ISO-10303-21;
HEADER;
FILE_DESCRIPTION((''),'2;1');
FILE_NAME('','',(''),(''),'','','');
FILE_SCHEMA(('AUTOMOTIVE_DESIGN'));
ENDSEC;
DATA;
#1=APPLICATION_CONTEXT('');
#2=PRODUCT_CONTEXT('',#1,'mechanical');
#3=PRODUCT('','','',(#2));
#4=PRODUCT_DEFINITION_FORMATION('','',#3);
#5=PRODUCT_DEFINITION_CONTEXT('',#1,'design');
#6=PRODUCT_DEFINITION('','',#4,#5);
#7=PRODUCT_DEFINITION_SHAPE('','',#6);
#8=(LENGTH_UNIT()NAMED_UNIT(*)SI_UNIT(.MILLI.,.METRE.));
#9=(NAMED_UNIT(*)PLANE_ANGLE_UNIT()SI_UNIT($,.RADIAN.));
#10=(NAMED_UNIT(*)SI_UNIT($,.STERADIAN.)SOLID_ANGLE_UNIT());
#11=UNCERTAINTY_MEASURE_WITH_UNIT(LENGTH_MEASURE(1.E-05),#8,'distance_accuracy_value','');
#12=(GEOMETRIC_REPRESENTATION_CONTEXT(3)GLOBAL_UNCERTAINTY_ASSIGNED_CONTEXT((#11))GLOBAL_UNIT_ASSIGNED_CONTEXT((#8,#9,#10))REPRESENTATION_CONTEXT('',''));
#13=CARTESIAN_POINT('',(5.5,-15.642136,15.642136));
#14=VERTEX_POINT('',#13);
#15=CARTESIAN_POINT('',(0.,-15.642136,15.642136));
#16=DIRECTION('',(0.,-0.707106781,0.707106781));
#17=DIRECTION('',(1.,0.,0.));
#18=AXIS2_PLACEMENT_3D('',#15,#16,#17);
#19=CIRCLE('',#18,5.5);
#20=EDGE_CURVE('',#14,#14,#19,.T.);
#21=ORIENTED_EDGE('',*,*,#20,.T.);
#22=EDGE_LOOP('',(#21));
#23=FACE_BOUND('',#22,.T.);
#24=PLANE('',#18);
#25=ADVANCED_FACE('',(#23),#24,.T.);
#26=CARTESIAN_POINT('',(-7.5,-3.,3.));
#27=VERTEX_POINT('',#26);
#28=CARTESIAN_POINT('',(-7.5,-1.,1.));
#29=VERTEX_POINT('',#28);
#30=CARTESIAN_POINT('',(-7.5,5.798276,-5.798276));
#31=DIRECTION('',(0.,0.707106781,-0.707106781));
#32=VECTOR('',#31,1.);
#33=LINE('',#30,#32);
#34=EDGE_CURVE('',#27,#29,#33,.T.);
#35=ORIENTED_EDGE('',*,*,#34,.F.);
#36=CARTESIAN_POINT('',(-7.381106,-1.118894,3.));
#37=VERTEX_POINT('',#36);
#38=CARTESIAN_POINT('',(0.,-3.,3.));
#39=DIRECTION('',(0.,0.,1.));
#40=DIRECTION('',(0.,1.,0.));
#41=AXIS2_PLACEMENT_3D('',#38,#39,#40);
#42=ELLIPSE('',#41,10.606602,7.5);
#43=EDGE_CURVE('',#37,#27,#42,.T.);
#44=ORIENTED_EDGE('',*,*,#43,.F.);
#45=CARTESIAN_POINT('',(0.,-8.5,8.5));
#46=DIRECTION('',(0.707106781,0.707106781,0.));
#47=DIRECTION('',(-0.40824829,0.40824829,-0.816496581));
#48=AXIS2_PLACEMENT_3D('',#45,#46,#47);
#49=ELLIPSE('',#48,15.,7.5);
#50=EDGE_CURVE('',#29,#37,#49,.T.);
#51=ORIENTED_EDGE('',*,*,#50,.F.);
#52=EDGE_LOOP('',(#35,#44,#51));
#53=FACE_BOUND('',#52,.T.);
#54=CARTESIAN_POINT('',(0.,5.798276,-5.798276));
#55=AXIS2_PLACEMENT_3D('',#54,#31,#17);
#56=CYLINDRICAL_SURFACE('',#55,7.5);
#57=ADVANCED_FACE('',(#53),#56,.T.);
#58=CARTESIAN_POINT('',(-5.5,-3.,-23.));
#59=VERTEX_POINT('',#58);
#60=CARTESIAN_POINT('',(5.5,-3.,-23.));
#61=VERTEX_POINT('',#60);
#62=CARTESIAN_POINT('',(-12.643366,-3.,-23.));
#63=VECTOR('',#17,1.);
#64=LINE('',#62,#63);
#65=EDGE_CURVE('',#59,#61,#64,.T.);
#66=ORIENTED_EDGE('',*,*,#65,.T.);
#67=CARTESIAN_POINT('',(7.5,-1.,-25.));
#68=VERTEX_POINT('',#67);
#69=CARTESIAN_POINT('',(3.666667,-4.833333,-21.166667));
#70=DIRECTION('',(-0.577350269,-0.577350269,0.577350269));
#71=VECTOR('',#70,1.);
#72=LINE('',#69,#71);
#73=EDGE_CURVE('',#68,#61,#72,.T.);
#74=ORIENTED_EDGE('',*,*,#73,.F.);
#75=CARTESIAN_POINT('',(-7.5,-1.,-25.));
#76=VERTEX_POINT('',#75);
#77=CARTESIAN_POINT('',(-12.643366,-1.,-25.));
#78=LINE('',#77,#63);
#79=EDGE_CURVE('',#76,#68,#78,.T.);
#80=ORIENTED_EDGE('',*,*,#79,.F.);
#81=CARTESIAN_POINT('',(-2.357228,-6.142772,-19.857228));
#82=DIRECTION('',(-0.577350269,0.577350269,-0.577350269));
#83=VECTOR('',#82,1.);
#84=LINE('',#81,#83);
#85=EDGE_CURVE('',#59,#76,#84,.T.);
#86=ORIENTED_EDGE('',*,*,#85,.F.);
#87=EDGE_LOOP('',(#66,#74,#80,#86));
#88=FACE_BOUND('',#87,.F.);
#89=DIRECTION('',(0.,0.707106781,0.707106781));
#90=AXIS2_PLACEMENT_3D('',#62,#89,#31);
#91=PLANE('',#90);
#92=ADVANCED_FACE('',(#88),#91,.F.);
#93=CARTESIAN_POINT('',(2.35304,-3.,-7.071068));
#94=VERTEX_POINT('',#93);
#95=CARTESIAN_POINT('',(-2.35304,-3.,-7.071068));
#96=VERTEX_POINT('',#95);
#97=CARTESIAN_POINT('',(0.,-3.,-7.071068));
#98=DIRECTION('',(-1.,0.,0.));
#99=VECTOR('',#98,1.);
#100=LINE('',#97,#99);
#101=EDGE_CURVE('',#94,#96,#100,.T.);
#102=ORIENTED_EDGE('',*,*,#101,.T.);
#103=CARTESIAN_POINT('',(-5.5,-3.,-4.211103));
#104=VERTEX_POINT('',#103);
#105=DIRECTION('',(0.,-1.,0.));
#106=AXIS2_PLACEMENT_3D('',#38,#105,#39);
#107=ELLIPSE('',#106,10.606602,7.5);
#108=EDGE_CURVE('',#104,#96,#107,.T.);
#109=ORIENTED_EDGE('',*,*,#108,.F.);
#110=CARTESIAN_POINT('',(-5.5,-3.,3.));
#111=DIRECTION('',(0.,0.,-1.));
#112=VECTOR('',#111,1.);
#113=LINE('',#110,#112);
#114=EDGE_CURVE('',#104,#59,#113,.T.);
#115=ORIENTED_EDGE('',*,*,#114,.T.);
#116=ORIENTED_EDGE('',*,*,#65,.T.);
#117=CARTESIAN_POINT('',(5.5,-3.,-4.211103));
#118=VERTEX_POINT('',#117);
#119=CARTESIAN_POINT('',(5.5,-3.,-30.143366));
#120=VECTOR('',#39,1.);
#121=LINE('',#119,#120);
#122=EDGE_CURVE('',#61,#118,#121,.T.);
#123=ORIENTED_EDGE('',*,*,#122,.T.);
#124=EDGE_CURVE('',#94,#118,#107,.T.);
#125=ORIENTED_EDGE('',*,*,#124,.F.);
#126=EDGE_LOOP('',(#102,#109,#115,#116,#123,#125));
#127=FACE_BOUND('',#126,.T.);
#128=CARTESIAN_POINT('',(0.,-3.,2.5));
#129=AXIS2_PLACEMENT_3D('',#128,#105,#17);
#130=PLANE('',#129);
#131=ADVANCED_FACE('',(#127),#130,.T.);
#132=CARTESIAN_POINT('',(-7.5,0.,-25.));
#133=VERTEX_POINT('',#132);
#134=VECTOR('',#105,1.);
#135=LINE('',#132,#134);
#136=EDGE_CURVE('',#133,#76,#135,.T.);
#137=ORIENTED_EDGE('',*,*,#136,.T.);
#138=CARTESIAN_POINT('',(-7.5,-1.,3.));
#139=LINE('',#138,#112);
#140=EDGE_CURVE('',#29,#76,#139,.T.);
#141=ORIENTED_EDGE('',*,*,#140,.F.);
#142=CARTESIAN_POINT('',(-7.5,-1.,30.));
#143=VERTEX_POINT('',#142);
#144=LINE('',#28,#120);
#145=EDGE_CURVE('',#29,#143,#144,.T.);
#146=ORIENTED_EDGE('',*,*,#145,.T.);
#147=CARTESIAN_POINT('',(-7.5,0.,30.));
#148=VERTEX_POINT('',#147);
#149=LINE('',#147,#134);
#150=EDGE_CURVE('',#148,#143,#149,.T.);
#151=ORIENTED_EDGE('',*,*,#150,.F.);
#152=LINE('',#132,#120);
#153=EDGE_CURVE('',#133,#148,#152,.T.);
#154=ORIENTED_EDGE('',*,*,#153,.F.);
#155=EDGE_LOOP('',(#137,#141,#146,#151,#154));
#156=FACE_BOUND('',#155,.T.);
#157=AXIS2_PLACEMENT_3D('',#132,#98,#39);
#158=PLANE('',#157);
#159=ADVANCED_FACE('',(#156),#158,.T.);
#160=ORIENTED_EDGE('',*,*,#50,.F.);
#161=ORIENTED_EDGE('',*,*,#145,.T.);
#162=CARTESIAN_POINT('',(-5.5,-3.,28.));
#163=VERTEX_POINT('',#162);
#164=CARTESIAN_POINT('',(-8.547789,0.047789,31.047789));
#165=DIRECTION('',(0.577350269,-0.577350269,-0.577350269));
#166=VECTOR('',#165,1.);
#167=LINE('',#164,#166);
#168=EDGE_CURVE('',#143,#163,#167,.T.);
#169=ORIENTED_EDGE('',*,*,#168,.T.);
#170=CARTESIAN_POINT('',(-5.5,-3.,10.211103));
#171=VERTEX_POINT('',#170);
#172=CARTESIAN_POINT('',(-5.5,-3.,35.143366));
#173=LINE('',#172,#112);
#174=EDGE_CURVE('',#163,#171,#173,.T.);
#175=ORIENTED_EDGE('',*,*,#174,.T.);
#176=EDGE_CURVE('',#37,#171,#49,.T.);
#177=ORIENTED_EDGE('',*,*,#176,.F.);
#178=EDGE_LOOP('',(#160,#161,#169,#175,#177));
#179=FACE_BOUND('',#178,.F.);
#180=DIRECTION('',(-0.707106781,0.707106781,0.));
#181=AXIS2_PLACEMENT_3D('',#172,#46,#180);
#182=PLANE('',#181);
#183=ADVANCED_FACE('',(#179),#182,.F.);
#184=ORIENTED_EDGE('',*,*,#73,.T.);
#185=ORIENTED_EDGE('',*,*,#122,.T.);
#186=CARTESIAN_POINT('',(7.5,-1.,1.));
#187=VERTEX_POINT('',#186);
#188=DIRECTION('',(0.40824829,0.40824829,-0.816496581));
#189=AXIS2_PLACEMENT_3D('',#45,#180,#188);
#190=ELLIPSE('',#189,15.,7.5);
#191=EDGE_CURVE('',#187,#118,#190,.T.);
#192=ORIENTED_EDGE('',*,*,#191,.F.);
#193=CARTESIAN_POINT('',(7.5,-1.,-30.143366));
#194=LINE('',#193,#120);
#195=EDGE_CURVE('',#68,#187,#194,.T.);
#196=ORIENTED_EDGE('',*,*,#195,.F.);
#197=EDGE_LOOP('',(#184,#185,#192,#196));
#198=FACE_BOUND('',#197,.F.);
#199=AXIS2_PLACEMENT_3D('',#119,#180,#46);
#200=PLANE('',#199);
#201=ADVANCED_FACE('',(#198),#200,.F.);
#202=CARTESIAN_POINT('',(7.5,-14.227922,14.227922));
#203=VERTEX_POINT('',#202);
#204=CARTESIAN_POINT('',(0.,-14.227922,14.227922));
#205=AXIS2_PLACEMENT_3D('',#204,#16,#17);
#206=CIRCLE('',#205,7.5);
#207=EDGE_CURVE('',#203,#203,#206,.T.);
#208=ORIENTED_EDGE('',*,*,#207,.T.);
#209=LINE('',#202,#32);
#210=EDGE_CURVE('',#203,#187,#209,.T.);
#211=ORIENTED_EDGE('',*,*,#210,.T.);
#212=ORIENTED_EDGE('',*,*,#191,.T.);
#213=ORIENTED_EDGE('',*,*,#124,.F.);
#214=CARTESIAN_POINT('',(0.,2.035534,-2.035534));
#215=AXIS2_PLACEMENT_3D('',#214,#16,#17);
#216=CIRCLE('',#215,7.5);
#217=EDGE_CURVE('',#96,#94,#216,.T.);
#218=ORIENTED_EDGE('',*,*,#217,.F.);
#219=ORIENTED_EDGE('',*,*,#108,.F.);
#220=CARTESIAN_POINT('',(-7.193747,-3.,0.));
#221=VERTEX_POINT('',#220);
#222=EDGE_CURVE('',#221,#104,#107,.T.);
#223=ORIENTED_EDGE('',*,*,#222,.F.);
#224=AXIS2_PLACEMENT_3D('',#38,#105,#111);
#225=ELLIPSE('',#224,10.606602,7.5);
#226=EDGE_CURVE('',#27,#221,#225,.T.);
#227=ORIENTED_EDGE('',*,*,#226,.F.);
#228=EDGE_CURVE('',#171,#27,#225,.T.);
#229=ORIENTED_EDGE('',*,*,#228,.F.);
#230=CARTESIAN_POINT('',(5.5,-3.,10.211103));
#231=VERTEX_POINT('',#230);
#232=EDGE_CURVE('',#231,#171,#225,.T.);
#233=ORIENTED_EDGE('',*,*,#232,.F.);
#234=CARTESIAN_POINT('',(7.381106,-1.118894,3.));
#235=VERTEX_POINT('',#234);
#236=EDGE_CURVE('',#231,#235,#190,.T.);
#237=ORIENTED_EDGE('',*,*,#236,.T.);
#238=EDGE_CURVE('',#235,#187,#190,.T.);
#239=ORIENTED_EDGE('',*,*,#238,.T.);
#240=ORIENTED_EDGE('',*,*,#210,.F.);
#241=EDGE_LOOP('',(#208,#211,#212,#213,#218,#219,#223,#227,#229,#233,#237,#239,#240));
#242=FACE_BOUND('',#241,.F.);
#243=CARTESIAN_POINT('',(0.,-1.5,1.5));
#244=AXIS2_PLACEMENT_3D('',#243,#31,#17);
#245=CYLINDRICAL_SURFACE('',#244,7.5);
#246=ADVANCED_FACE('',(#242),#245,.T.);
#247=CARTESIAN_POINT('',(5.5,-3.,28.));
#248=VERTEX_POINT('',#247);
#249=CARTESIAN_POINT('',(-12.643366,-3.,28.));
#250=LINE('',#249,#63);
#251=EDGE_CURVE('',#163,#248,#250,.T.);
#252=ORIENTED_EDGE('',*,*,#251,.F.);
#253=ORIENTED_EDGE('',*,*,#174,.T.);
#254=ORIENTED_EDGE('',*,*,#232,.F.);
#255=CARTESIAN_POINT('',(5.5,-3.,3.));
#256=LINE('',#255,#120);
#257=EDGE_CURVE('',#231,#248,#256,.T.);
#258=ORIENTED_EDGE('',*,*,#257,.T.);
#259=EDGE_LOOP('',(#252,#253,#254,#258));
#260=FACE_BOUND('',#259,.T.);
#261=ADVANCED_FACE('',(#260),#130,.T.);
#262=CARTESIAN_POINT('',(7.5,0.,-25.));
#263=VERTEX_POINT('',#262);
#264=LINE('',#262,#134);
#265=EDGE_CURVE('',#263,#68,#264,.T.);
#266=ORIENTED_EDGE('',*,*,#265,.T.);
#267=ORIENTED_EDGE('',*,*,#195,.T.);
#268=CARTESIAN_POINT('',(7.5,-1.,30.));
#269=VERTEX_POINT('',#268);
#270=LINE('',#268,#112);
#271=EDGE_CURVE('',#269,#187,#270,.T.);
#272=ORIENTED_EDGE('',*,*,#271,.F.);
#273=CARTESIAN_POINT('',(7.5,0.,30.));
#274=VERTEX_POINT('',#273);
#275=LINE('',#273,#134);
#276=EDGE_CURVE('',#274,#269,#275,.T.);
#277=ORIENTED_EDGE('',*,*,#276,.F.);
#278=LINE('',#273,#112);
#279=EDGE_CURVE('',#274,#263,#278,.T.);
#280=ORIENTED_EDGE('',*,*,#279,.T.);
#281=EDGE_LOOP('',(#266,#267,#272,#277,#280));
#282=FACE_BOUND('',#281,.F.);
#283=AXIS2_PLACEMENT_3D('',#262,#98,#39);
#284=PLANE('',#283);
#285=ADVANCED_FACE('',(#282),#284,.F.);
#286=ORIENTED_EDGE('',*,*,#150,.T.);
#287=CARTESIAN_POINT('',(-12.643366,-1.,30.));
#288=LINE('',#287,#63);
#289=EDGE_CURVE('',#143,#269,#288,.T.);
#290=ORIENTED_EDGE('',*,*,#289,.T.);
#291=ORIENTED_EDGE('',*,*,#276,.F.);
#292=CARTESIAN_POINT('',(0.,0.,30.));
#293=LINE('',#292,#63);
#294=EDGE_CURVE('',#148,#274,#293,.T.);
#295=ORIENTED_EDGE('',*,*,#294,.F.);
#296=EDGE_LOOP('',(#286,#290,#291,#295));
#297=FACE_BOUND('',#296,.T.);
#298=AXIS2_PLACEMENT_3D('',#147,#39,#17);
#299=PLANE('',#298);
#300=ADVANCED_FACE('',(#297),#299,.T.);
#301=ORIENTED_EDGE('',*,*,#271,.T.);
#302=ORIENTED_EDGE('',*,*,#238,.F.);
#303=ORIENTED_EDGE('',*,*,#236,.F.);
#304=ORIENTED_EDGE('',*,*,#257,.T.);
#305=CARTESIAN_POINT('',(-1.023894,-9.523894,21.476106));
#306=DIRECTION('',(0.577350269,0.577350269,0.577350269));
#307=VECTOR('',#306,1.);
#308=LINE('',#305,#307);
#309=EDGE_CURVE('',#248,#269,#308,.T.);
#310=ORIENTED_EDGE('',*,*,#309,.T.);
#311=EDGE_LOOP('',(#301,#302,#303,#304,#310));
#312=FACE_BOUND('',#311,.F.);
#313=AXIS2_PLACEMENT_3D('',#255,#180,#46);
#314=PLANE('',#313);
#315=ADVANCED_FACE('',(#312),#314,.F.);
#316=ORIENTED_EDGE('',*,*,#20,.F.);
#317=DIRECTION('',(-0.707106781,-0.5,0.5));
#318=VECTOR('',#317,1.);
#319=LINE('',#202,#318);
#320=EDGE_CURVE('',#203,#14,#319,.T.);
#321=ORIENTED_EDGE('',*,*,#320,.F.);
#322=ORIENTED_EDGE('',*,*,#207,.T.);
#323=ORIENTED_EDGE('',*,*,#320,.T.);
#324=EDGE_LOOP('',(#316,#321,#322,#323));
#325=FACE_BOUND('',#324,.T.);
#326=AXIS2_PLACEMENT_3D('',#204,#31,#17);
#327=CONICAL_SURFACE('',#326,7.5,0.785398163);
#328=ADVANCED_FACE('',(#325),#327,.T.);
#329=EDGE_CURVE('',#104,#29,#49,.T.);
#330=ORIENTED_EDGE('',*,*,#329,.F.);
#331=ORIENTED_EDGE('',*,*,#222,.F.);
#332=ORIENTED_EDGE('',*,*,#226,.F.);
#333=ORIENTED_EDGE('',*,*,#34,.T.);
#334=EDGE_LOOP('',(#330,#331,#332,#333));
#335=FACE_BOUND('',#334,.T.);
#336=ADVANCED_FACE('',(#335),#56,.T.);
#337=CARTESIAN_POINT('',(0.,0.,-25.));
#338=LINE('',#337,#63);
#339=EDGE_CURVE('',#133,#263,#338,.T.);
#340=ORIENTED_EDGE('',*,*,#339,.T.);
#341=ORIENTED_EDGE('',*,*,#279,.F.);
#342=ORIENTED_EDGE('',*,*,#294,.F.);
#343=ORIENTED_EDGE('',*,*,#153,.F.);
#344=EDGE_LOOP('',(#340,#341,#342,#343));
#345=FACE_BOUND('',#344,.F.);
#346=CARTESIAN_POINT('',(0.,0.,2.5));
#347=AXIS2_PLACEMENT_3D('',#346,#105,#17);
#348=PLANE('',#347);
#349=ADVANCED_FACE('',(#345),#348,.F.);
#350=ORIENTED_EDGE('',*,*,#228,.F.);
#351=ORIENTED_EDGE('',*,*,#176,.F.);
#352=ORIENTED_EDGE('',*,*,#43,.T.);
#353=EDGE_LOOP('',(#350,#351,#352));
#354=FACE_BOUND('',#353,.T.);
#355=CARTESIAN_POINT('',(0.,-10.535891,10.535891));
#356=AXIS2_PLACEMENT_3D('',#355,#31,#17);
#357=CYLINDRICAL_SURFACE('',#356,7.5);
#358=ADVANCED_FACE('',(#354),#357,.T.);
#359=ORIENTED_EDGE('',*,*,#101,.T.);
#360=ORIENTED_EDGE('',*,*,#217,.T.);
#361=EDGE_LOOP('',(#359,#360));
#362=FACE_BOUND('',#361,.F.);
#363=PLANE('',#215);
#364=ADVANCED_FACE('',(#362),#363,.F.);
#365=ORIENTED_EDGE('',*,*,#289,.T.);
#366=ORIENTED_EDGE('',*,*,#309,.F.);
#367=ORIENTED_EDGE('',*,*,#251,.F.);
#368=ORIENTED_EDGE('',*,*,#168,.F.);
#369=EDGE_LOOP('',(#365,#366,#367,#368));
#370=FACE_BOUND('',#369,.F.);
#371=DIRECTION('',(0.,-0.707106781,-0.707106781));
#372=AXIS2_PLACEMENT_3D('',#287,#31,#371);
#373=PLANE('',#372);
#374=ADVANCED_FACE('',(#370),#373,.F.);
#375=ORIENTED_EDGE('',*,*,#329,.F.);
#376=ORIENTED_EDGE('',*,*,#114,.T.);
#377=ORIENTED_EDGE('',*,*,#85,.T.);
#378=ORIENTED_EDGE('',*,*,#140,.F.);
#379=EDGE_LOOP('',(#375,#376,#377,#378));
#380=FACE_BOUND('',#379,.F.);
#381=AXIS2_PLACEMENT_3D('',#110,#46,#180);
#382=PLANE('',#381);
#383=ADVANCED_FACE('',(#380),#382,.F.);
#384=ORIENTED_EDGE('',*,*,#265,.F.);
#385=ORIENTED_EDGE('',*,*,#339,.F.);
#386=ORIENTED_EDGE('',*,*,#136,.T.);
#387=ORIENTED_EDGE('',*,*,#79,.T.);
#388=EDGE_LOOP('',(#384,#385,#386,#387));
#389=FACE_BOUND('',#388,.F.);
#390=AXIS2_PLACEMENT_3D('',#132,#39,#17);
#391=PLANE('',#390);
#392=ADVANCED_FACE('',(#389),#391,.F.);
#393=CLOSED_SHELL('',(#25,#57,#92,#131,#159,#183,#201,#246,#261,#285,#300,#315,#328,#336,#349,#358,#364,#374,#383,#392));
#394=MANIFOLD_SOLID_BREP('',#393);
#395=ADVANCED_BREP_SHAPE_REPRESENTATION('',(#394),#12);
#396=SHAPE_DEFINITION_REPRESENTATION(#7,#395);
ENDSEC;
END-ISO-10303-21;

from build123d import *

# Parameters (mm, degrees)
F0_W          = 15
F0_H          = 55
F1_DEPTH      = 3
F4_R          = 7.5
F5_DEPTH      = 20
F5_DEPTH_BACK = 5
F6_T1_DEPTH   = 25.2867319519
F6_T6_DEPTH   = 32.1433659759
F6_S7_R       = 7.5
F6_T8_DEPTH   = 18
F6_T14_DEPTH  = 32.1433659759
F6_S15_R      = 7.5
F6_T16_DEPTH  = 18
F6_T20_DEPTH  = 33.1433659759
F6_S21_R      = 7.5
F6_T22_DEPTH  = 18
F6_T26_DEPTH  = 33.1433659759
F6_S27_R      = 7.5
F6_T28_DEPTH  = 18
F7_DEPTH      = 25


# Not quite as in the source:
# - a fillet or chamfer that OpenCascade refuses, or shapes differently, is made with other operations: its cross-section is extruded or revolved along the edge and cut away or added


with BuildPart() as f1:
    # F0 (on Front) → F1 (new body)
    with BuildSketch(Plane.XZ):
        with Locations((0, 2.5)):
            Rectangle(F0_W, F0_H)
    extrude(amount=F1_DEPTH)

    # F4 (on face) → F5 (join, two sides)
    with BuildSketch(Plane(origin=(0, -1.5, 1.5), x_dir=(1, 0, 0), z_dir=(0, -0.7071067812, 0.7071067812))) as f5_sk:
        Circle(F4_R)
    extrude(amount=F5_DEPTH)
    extrude(f5_sk.sketch, amount=-F5_DEPTH_BACK)

    # F6: chamfer of 2 on 7 edges, made by hand

    # F6_s2 → F6_t1 (cut)
    with BuildSketch(Plane.YZ.offset(-12.6433659759)):
        Polygon((-1, 30), (-3, 28), (-3, 30), align=None)
        Polygon((-3, -23), (-1, -25), (-3, -25), align=None)
    extrude(amount=F6_T1_DEPTH, mode=Mode.SUBTRACT)


with BuildPart() as f6_tool4:
    # F6_s5 → F6_t6 (new body)
    with BuildSketch(Plane.XY.offset(35.1433659759)):
        Polygon((-5.5, -3), (-7.5, -1), (-7.5, -3), align=None)
    extrude(amount=-F6_T6_DEPTH)

    # F6_s7 → F6_t8 (cut, symmetric)
    with BuildSketch(Plane(origin=(0, -10.5358910397, 10.5358910397), x_dir=(1, 0, 0), z_dir=(0, 0.7071067812, -0.7071067812))):
        Circle(F6_S7_R)
    extrude(amount=F6_T8_DEPTH, both=True, mode=Mode.SUBTRACT)


with BuildPart() as f1_1:
    add(f1.part)

    # F6_t3: cut F6_tool4
    add(f6_tool4.part, mode=Mode.SUBTRACT)

    # F6_s9 → F6_t10 (revolve, cut)
    with BuildSketch(Plane(origin=(0, 0, 0), x_dir=(1, 0, 0), z_dir=(0, -0.7071067812, -0.7071067812))):
        Polygon((7.5, 20.1213203436), (5.5, 22.1213203436), (7.5, 22.1213203436), align=None)
    revolve(axis=Axis((0, -15.6421356237, 15.6421356237), (0, -0.7071067812, 0.7071067812)), mode=Mode.SUBTRACT)


with BuildPart() as f6_tool12:
    # F6_s13 → F6_t14 (new body)
    with BuildSketch(Plane.XY.offset(3)):
        Polygon((5.5, -3), (7.5, -1), (7.5, -3), align=None)
    extrude(amount=F6_T14_DEPTH)

    # F6_s15 → F6_t16 (cut, symmetric)
    with BuildSketch(Plane(origin=(0, -10.5358910397, 10.5358910397), x_dir=(1, 0, 0), z_dir=(0, 0.7071067812, -0.7071067812))):
        Circle(F6_S15_R)
    extrude(amount=F6_T16_DEPTH, both=True, mode=Mode.SUBTRACT)


with BuildPart() as f1_2:
    add(f1_1.part)

    # F6_t11: cut F6_tool12
    add(f6_tool12.part, mode=Mode.SUBTRACT)


with BuildPart() as f6_tool18:
    # F6_s19 → F6_t20 (new body)
    with BuildSketch(Plane.XY.offset(-30.1433659759)):
        Polygon((5.5, -3), (7.5, -1), (7.5, -3), align=None)
    extrude(amount=F6_T20_DEPTH)

    # F6_s21 → F6_t22 (cut, symmetric)
    with BuildSketch(Plane(origin=(0, 5.7982756057, -5.7982756057), x_dir=(1, 0, 0), z_dir=(0, 0.7071067812, -0.7071067812))):
        Circle(F6_S21_R)
    extrude(amount=F6_T22_DEPTH, both=True, mode=Mode.SUBTRACT)


with BuildPart() as f1_3:
    add(f1_2.part)

    # F6_t17: cut F6_tool18
    add(f6_tool18.part, mode=Mode.SUBTRACT)


with BuildPart() as f6_tool24:
    # F6_s25 → F6_t26 (new body)
    with BuildSketch(Plane.XY.offset(3)):
        Polygon((-5.5, -3), (-7.5, -1), (-7.5, -3), align=None)
    extrude(amount=-F6_T26_DEPTH)

    # F6_s27 → F6_t28 (cut, symmetric)
    with BuildSketch(Plane(origin=(0, 5.7982756057, -5.7982756057), x_dir=(1, 0, 0), z_dir=(0, 0.7071067812, -0.7071067812))):
        Circle(F6_S27_R)
    extrude(amount=F6_T28_DEPTH, both=True, mode=Mode.SUBTRACT)


with BuildPart() as f1_4:
    add(f1_3.part)

    # F6_t23: cut F6_tool24
    add(f6_tool24.part, mode=Mode.SUBTRACT)

    # F0 (on Front) → F7 (cut)
    with BuildSketch(Plane.XZ):
        with Locations((0, 2.5)):
            Rectangle(F0_W, F0_H)
    extrude(amount=-F7_DEPTH, mode=Mode.SUBTRACT)


solid = f1_4.part
